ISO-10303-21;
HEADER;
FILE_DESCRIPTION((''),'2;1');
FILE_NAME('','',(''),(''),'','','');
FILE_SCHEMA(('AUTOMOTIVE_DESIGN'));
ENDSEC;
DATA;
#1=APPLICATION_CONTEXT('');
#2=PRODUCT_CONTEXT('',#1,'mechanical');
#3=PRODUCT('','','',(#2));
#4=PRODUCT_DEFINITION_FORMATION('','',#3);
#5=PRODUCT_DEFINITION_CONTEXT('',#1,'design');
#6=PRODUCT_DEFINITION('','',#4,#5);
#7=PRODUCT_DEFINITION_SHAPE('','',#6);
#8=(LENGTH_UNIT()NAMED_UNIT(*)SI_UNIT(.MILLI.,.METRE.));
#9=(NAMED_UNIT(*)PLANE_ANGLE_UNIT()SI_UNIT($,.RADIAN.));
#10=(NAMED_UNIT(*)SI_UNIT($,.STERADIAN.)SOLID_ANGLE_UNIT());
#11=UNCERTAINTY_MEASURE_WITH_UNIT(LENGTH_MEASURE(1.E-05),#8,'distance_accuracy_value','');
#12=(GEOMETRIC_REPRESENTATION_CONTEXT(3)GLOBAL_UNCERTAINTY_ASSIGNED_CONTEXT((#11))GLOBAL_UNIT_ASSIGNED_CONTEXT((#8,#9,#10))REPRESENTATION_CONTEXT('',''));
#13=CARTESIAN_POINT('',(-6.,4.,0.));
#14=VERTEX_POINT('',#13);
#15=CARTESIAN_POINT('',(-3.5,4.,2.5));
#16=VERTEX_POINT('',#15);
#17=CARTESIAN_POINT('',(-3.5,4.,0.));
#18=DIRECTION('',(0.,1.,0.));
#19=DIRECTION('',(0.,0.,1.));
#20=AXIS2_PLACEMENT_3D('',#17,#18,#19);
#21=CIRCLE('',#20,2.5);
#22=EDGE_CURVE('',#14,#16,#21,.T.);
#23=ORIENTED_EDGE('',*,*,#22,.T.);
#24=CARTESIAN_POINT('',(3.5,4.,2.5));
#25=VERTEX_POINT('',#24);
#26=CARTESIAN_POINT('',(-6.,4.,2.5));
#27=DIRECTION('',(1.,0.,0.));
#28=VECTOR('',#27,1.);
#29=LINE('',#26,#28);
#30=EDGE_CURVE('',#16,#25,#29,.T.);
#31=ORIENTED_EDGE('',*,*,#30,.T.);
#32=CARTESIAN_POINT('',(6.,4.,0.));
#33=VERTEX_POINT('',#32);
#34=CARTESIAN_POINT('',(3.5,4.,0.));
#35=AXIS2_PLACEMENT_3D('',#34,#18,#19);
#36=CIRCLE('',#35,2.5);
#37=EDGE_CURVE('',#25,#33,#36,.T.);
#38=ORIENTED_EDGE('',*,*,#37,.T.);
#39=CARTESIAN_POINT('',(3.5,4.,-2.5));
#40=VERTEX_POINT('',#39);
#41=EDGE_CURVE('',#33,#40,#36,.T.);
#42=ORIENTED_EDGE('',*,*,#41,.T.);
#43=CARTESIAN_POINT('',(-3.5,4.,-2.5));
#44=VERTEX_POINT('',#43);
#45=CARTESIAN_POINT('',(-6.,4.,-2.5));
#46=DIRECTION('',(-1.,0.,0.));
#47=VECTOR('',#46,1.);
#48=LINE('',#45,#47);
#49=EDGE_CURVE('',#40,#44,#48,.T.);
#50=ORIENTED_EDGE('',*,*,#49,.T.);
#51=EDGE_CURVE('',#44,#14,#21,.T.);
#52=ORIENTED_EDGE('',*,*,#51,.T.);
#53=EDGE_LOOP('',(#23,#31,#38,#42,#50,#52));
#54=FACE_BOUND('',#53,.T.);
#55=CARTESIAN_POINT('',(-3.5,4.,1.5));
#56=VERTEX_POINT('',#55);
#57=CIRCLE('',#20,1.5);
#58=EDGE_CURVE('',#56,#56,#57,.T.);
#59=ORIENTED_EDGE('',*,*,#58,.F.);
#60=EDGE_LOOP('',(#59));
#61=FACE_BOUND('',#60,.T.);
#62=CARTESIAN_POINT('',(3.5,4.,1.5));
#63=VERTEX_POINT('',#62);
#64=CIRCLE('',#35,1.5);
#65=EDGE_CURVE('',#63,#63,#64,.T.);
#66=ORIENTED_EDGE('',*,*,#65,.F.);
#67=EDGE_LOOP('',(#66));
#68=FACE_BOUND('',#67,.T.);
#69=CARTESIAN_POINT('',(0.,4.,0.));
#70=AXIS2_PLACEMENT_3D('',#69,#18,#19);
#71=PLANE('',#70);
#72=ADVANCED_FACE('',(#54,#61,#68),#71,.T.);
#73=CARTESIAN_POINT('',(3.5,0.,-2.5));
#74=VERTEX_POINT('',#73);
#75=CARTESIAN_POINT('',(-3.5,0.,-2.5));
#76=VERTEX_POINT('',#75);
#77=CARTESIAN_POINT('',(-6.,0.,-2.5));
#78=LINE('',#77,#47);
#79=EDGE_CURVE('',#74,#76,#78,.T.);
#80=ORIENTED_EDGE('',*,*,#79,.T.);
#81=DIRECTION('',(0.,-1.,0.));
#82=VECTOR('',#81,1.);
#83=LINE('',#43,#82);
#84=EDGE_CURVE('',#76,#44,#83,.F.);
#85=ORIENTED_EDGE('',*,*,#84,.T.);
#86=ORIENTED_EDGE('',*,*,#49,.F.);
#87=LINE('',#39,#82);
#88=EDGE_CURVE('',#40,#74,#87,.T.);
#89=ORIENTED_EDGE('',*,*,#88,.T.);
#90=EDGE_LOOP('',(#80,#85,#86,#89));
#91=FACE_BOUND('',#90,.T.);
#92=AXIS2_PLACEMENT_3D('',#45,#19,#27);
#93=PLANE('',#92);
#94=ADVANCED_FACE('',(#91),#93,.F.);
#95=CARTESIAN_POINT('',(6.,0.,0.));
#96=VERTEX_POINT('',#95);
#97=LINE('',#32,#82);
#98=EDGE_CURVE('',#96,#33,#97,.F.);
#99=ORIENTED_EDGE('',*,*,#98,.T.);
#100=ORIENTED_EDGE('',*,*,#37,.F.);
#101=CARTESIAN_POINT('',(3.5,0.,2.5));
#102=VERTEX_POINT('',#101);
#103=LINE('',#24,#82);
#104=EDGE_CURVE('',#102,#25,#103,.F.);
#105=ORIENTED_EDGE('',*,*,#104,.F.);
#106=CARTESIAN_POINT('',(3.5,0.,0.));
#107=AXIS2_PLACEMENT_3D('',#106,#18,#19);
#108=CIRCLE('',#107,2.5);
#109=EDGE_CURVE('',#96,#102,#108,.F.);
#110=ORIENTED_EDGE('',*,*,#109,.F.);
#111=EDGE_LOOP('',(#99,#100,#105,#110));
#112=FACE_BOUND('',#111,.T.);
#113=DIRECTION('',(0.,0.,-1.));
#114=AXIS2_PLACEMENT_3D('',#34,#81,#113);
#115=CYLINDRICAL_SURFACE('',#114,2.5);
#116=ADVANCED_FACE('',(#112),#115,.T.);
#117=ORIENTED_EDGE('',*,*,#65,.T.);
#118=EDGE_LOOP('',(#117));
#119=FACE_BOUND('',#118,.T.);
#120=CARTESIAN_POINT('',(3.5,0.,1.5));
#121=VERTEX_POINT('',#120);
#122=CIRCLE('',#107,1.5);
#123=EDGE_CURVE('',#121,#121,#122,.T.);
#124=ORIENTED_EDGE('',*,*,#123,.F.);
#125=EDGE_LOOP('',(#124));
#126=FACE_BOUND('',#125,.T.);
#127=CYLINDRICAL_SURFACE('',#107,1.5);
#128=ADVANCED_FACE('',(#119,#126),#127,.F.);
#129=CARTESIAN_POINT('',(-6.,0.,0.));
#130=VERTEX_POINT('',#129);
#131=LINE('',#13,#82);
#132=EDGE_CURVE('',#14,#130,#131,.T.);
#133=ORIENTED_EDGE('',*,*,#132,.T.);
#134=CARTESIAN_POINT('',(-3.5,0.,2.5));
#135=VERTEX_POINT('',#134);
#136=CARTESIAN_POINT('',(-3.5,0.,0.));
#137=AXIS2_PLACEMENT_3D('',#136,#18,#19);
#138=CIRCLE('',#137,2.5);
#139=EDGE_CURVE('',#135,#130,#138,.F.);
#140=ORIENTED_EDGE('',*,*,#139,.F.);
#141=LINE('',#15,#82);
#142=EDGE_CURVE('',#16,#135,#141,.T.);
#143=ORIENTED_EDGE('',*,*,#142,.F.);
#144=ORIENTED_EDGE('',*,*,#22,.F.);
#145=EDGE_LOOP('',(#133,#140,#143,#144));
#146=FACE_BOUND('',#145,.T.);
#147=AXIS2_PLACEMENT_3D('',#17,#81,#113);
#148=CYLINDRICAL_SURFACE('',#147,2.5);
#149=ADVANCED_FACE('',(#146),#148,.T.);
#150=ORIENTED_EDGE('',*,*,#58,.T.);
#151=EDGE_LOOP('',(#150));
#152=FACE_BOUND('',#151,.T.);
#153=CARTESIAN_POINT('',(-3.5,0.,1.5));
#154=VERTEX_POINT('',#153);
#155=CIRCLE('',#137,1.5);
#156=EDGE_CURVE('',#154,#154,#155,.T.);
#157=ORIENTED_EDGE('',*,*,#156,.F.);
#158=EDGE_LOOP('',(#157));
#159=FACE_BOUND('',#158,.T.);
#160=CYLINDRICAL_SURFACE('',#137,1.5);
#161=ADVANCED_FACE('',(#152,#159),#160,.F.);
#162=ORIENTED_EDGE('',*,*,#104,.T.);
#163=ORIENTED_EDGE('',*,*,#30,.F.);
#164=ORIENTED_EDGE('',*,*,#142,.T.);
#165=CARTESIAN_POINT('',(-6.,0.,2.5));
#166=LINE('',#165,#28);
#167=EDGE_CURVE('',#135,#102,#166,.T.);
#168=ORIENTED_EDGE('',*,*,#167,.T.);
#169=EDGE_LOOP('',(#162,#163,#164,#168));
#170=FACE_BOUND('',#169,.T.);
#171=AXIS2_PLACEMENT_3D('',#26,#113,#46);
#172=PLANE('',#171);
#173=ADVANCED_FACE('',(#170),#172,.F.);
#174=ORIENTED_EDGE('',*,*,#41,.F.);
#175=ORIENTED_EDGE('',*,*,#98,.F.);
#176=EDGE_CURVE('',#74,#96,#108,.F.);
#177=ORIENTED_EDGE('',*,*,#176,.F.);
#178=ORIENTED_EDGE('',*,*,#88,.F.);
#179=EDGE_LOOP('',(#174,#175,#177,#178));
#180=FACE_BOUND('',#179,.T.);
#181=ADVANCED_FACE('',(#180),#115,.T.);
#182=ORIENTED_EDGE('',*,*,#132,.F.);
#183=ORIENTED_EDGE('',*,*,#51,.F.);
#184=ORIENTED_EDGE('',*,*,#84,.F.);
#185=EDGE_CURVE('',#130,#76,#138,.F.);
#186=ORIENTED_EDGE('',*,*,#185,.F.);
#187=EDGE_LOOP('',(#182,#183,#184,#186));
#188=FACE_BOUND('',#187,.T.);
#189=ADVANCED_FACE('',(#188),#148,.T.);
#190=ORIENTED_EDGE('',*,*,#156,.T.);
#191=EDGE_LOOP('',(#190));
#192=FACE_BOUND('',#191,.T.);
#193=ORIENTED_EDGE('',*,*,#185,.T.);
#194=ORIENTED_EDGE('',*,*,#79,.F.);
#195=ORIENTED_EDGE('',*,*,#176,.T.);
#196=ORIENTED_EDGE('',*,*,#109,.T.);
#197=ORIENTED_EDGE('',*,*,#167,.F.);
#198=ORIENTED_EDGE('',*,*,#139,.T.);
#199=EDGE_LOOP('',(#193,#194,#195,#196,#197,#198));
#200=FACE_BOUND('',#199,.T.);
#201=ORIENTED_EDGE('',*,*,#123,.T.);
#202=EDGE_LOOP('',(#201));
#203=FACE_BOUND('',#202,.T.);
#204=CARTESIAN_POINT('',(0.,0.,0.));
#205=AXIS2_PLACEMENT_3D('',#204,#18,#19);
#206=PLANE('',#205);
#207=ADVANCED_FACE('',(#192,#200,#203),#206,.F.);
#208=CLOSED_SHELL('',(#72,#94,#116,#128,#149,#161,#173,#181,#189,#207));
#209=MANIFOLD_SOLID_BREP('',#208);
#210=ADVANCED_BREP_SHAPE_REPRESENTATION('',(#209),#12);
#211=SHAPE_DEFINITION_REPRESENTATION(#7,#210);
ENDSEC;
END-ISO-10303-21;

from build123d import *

# Parameters (mm, degrees)
SKETCH1_W           = 12
SKETCH1_H           = 5
BOSS_EXTRUDE1_DEPTH = 4
SKETCH2_R           = 1.5
CUT_EXTRUDE1_DEPTH  = 4
SKETCH3_R           = 1.5
CUT_EXTRUDE2_DEPTH  = 4
FILLET1_R           = 2.5


with BuildPart() as part:
    # Sketch1 → Boss-Extrude1 (new body)
    with BuildSketch(Plane(origin=(0, 0, 0), x_dir=(1, 0, 0), z_dir=(0, 1, 0))):
        Rectangle(SKETCH1_W, SKETCH1_H)
    extrude(amount=BOSS_EXTRUDE1_DEPTH)

    # Sketch2 → Cut-Extrude1 (cut)
    with BuildSketch(Plane(origin=(0, 4, 0), x_dir=(1, 0, 0), z_dir=(0, 1, 0))):
        with Locations(Location((3.5, 0, 0), (0, 0, 270))):
            Circle(SKETCH2_R)
    extrude(amount=-CUT_EXTRUDE1_DEPTH, mode=Mode.SUBTRACT)

    # Sketch3 → Cut-Extrude2 (cut)
    with BuildSketch(Plane(origin=(0, 4, 0), x_dir=(1, 0, 0), z_dir=(0, 1, 0))):
        with Locations(Location((-3.5, 0, 0), (0, 0, 270))):
            Circle(SKETCH3_R)
    extrude(amount=-CUT_EXTRUDE2_DEPTH, mode=Mode.SUBTRACT)

    # Fillet1
    fillet1_edges = [part.edges().sort_by_distance(p)[0] for p in [
        (6, 2, 2.5),
        (6, 2, -2.5),
        (-6, 2, 2.5),
        (-6, 2, -2.5),
    ]]
    fillet(fillet1_edges, radius=FILLET1_R - 0.0001)  # a hair under: the kernel refuses the full size


solid = part.part
